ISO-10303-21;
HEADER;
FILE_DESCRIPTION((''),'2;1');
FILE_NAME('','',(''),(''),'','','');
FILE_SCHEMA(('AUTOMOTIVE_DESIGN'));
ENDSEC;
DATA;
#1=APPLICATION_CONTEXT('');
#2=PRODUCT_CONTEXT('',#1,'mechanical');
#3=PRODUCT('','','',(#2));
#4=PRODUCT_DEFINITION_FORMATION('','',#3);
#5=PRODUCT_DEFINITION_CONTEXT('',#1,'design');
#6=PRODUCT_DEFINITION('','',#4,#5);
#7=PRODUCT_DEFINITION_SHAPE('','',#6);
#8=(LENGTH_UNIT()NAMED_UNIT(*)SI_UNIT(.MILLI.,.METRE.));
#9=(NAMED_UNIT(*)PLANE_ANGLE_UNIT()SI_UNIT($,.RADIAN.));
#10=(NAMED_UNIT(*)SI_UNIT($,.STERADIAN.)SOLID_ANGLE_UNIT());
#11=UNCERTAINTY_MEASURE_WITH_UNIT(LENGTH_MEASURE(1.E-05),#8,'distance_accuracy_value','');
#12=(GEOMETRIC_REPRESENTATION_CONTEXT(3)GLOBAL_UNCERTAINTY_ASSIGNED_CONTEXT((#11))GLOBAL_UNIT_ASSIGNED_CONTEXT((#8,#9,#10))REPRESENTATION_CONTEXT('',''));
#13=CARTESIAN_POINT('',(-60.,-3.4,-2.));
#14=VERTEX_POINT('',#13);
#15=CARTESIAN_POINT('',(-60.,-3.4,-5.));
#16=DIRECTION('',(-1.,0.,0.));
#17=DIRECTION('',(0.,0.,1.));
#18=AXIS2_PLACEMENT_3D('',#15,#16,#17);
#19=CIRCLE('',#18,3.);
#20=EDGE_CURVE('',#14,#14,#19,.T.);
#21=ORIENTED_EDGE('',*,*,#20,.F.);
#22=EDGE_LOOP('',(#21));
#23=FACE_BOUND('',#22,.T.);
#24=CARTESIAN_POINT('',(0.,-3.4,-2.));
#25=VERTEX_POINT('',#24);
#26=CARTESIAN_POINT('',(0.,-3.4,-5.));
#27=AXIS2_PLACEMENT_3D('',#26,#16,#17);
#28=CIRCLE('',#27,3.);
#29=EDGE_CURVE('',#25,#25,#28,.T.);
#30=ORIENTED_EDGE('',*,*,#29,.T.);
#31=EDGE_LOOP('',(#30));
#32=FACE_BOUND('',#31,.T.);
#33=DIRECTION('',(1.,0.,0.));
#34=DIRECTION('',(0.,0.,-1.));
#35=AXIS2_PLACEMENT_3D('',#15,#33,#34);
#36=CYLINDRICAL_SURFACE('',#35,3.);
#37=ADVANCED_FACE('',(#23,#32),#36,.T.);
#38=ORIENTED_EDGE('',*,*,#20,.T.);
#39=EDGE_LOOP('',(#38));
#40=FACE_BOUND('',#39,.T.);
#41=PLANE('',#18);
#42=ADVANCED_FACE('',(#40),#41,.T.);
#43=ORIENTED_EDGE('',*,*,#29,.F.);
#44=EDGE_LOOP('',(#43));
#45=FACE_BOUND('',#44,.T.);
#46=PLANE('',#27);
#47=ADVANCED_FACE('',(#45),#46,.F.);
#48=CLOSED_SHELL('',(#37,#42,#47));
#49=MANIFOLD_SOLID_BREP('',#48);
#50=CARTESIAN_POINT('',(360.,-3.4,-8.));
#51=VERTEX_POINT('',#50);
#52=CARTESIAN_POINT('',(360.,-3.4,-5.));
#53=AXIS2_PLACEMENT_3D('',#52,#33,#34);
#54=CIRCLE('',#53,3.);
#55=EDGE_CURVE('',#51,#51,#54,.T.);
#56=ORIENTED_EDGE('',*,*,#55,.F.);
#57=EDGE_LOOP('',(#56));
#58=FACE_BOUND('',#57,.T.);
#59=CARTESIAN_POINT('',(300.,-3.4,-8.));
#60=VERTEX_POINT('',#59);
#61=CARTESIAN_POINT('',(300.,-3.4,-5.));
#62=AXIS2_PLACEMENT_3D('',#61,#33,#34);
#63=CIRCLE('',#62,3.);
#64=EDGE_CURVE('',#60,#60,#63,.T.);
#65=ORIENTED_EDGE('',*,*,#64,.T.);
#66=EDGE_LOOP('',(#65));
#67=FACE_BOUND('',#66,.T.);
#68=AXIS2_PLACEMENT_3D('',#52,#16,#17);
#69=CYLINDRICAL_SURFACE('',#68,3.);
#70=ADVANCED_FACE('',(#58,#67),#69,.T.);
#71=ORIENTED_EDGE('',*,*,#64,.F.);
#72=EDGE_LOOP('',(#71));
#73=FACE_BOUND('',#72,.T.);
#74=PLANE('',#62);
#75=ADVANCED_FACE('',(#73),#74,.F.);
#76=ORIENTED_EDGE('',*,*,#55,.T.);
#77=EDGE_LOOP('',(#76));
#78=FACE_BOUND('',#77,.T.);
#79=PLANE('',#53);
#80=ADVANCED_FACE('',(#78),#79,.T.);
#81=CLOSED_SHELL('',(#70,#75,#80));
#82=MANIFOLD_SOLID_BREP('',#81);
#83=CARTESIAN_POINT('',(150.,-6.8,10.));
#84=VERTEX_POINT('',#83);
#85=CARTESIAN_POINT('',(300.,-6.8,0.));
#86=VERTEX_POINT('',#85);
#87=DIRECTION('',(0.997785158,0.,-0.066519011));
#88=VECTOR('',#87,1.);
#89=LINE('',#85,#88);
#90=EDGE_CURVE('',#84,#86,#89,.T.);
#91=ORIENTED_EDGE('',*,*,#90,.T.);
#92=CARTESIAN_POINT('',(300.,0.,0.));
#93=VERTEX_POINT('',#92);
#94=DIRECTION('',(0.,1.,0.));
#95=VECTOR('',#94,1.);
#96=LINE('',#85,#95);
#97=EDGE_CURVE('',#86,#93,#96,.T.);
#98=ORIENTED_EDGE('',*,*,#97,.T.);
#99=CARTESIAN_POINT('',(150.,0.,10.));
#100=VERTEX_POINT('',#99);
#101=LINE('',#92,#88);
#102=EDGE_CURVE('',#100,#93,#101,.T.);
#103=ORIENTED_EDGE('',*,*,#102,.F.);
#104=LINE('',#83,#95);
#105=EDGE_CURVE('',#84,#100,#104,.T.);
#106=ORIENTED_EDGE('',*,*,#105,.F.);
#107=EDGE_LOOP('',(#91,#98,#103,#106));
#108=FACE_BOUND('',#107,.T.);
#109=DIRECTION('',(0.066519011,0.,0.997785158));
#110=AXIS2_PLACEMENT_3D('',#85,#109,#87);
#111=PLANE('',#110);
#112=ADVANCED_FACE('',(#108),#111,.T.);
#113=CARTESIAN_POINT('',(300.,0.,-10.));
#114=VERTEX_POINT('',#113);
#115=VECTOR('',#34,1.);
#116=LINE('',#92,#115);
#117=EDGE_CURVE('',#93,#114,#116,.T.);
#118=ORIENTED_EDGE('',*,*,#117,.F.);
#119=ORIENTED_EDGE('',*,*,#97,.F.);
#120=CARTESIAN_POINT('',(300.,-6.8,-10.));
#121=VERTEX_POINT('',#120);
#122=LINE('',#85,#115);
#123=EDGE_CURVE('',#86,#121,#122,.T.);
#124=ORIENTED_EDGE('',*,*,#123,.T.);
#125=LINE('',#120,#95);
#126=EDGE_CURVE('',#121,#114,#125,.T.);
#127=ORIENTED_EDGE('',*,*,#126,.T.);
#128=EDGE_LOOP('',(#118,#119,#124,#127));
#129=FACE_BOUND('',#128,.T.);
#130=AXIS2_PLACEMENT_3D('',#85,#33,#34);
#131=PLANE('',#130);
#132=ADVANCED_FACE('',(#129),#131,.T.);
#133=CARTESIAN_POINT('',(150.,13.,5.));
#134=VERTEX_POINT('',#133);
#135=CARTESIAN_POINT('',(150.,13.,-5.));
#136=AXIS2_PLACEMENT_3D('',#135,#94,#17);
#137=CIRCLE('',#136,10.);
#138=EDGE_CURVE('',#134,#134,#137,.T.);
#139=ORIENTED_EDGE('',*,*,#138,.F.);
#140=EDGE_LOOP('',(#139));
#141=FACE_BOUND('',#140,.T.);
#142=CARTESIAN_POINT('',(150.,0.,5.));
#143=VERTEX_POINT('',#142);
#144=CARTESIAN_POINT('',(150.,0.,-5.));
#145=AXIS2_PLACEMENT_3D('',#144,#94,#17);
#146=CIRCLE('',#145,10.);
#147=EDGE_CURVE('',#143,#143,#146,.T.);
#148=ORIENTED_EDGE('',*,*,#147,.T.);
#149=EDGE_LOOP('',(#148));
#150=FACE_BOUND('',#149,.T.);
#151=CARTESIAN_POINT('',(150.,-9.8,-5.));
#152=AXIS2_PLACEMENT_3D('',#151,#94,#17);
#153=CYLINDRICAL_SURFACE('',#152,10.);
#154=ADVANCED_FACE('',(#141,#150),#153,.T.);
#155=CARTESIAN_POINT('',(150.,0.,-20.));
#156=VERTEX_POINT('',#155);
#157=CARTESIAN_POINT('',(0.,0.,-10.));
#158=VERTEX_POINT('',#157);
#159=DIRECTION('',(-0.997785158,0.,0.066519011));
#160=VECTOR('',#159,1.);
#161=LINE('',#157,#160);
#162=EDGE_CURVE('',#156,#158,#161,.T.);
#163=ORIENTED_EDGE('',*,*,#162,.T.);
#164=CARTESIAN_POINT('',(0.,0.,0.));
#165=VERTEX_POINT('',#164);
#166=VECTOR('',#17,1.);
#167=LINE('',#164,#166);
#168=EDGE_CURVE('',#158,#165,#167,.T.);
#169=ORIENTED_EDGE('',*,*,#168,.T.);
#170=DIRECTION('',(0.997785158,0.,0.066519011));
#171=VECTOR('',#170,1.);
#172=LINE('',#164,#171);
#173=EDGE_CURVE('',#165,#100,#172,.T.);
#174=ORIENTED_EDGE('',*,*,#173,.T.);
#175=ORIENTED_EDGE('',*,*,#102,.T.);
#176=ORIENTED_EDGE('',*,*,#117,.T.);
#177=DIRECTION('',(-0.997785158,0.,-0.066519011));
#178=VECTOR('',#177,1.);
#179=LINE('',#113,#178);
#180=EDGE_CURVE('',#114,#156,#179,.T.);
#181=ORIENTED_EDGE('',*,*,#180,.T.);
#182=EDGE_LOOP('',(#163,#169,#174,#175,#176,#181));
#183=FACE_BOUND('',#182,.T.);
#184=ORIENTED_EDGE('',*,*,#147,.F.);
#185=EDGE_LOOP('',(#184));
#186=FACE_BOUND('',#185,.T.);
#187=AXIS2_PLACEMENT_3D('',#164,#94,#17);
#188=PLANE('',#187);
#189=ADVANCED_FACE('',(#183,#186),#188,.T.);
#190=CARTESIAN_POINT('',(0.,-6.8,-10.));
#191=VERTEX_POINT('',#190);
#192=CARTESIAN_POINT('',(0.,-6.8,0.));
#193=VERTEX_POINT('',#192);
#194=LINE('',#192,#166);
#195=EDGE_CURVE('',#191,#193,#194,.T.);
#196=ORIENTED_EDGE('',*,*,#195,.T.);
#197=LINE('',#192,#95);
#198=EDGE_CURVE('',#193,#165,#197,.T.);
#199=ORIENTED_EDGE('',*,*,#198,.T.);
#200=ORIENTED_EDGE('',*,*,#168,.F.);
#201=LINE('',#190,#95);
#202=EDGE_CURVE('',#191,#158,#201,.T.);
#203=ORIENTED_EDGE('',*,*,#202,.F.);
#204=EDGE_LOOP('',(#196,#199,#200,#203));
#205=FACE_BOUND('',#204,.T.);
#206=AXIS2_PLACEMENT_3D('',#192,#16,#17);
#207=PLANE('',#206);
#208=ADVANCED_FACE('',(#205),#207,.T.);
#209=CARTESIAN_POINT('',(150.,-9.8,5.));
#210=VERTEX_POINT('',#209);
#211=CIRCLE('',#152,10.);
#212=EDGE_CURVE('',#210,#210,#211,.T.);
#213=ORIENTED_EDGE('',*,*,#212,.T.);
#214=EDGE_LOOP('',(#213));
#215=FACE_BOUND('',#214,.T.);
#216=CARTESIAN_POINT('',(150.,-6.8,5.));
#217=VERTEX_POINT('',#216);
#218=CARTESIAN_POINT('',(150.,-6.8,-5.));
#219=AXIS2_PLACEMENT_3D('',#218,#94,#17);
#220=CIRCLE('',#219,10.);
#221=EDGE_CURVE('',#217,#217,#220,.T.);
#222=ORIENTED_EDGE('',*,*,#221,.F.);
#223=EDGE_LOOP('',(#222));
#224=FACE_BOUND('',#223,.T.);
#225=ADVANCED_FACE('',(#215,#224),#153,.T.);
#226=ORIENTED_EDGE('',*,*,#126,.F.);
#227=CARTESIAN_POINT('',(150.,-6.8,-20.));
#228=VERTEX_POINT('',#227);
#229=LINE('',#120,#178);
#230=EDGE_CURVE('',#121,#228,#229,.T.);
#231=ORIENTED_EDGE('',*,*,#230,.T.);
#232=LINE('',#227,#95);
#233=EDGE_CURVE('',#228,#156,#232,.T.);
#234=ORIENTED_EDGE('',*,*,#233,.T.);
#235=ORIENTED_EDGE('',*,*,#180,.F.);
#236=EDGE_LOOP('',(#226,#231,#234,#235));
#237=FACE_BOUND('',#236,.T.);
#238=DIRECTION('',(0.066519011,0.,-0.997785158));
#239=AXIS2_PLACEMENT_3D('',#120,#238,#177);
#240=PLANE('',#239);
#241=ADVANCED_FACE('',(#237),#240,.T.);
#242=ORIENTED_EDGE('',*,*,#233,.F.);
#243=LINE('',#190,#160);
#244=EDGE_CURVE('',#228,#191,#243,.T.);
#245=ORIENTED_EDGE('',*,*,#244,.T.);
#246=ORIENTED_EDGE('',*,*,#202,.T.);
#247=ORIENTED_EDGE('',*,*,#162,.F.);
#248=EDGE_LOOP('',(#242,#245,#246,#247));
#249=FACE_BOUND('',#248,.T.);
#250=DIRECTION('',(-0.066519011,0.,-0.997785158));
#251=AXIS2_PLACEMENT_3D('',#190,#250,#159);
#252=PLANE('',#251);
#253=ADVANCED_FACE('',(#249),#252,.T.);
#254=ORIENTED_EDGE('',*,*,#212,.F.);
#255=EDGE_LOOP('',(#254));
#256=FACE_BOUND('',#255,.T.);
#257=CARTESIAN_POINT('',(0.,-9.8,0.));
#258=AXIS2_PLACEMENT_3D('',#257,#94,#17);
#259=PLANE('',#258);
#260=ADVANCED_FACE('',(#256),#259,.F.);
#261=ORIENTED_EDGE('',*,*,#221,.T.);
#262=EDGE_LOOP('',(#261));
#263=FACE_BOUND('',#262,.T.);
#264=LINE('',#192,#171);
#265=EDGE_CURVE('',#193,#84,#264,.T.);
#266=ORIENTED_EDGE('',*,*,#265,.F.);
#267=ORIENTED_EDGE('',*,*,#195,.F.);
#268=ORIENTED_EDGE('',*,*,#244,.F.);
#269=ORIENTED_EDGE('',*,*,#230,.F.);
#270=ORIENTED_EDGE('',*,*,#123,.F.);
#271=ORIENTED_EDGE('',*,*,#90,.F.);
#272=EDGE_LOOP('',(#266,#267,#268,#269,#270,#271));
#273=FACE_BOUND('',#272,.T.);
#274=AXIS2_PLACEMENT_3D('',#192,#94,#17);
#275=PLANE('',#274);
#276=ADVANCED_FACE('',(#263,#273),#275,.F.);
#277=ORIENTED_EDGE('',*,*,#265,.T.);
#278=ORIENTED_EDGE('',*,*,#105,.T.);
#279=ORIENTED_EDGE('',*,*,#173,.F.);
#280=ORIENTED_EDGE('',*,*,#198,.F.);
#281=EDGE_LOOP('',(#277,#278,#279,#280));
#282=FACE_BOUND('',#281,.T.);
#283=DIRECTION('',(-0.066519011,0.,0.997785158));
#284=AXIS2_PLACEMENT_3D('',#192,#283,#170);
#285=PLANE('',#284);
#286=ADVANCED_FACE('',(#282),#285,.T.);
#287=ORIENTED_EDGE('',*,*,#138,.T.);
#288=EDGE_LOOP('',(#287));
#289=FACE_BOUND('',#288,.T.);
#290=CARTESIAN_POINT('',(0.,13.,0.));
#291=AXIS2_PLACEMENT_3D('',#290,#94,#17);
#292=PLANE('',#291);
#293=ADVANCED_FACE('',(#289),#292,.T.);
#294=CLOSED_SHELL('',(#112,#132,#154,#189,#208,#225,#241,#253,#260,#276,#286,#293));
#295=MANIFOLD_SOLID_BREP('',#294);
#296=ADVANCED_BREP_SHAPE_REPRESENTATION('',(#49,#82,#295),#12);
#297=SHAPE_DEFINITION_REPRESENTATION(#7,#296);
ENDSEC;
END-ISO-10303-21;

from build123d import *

# Parameters (mm, degrees)
SKETCH2_R                = 10
BASE_FLANGE1_DEPTH       = 6.8
SKETCH7_R                = 3
BASE_FLANGE3_DEPTH       = 60
SKETCH14_R               = 3
BASE_FLANGE4_DEPTH       = 60
BOSS_EXTRUDE1_DEPTH      = 13
BOSS_EXTRUDE1_DEPTH_BACK = 9.8


# Sheet-metal steps are written as plain solids
with BuildPart() as part:
    # Sketch2 → Base-Flange1 (new body)
    with BuildSketch(Plane(origin=(0, 0, 0), x_dir=(1, 0, 0), z_dir=(0, 1, 0))):
        Polygon((0, 0), (0, 10), (150, 20), (300, 10), (300, 0), (150, -10), align=None)
        with Locations(Location((150, 5, 0), (0, 0, 270))):
            Circle(SKETCH2_R, mode=Mode.SUBTRACT)
    extrude(amount=-BASE_FLANGE1_DEPTH)

    # Sketch2<2> → Boss-Extrude1 (add, two sides: drawn at the far end of the back side and taken through both)
    with BuildSketch(Plane(origin=(0, 0, 0), x_dir=(1, 0, 0), z_dir=(0, 1, 0)).offset(-BOSS_EXTRUDE1_DEPTH_BACK)):
        with BuildLine():
            ThreePointArc((150, 15), (140, 5), (150, -5))
            Line((150, -5), (150, 15))
        make_face()
        with BuildLine():
            Line((150, 15), (150, -5))
            ThreePointArc((150, -5), (157.071067812, -2.071067812), (160, 5))
            ThreePointArc((160, 5), (157.071067812, 12.071067812), (150, 15))
        make_face()
    extrude(amount=BOSS_EXTRUDE1_DEPTH + BOSS_EXTRUDE1_DEPTH_BACK)


with BuildPart() as body_2:
    # Sketch7 → Base-Flange3 (new body)
    with BuildSketch(Plane.ZY):
        with Locations((-5, -3.4)):
            Circle(SKETCH7_R)
    extrude(amount=BASE_FLANGE3_DEPTH)


with BuildPart() as body_3:
    # Sketch14 → Base-Flange4 (new body)
    with BuildSketch(Plane(origin=(300, 0, 0), x_dir=(0, 0, -1), z_dir=(1, 0, 0))):
        with Locations((5, -3.4)):
            Circle(SKETCH14_R)
    extrude(amount=BASE_FLANGE4_DEPTH)


solid = Compound([part.part, body_2.part, body_3.part])
